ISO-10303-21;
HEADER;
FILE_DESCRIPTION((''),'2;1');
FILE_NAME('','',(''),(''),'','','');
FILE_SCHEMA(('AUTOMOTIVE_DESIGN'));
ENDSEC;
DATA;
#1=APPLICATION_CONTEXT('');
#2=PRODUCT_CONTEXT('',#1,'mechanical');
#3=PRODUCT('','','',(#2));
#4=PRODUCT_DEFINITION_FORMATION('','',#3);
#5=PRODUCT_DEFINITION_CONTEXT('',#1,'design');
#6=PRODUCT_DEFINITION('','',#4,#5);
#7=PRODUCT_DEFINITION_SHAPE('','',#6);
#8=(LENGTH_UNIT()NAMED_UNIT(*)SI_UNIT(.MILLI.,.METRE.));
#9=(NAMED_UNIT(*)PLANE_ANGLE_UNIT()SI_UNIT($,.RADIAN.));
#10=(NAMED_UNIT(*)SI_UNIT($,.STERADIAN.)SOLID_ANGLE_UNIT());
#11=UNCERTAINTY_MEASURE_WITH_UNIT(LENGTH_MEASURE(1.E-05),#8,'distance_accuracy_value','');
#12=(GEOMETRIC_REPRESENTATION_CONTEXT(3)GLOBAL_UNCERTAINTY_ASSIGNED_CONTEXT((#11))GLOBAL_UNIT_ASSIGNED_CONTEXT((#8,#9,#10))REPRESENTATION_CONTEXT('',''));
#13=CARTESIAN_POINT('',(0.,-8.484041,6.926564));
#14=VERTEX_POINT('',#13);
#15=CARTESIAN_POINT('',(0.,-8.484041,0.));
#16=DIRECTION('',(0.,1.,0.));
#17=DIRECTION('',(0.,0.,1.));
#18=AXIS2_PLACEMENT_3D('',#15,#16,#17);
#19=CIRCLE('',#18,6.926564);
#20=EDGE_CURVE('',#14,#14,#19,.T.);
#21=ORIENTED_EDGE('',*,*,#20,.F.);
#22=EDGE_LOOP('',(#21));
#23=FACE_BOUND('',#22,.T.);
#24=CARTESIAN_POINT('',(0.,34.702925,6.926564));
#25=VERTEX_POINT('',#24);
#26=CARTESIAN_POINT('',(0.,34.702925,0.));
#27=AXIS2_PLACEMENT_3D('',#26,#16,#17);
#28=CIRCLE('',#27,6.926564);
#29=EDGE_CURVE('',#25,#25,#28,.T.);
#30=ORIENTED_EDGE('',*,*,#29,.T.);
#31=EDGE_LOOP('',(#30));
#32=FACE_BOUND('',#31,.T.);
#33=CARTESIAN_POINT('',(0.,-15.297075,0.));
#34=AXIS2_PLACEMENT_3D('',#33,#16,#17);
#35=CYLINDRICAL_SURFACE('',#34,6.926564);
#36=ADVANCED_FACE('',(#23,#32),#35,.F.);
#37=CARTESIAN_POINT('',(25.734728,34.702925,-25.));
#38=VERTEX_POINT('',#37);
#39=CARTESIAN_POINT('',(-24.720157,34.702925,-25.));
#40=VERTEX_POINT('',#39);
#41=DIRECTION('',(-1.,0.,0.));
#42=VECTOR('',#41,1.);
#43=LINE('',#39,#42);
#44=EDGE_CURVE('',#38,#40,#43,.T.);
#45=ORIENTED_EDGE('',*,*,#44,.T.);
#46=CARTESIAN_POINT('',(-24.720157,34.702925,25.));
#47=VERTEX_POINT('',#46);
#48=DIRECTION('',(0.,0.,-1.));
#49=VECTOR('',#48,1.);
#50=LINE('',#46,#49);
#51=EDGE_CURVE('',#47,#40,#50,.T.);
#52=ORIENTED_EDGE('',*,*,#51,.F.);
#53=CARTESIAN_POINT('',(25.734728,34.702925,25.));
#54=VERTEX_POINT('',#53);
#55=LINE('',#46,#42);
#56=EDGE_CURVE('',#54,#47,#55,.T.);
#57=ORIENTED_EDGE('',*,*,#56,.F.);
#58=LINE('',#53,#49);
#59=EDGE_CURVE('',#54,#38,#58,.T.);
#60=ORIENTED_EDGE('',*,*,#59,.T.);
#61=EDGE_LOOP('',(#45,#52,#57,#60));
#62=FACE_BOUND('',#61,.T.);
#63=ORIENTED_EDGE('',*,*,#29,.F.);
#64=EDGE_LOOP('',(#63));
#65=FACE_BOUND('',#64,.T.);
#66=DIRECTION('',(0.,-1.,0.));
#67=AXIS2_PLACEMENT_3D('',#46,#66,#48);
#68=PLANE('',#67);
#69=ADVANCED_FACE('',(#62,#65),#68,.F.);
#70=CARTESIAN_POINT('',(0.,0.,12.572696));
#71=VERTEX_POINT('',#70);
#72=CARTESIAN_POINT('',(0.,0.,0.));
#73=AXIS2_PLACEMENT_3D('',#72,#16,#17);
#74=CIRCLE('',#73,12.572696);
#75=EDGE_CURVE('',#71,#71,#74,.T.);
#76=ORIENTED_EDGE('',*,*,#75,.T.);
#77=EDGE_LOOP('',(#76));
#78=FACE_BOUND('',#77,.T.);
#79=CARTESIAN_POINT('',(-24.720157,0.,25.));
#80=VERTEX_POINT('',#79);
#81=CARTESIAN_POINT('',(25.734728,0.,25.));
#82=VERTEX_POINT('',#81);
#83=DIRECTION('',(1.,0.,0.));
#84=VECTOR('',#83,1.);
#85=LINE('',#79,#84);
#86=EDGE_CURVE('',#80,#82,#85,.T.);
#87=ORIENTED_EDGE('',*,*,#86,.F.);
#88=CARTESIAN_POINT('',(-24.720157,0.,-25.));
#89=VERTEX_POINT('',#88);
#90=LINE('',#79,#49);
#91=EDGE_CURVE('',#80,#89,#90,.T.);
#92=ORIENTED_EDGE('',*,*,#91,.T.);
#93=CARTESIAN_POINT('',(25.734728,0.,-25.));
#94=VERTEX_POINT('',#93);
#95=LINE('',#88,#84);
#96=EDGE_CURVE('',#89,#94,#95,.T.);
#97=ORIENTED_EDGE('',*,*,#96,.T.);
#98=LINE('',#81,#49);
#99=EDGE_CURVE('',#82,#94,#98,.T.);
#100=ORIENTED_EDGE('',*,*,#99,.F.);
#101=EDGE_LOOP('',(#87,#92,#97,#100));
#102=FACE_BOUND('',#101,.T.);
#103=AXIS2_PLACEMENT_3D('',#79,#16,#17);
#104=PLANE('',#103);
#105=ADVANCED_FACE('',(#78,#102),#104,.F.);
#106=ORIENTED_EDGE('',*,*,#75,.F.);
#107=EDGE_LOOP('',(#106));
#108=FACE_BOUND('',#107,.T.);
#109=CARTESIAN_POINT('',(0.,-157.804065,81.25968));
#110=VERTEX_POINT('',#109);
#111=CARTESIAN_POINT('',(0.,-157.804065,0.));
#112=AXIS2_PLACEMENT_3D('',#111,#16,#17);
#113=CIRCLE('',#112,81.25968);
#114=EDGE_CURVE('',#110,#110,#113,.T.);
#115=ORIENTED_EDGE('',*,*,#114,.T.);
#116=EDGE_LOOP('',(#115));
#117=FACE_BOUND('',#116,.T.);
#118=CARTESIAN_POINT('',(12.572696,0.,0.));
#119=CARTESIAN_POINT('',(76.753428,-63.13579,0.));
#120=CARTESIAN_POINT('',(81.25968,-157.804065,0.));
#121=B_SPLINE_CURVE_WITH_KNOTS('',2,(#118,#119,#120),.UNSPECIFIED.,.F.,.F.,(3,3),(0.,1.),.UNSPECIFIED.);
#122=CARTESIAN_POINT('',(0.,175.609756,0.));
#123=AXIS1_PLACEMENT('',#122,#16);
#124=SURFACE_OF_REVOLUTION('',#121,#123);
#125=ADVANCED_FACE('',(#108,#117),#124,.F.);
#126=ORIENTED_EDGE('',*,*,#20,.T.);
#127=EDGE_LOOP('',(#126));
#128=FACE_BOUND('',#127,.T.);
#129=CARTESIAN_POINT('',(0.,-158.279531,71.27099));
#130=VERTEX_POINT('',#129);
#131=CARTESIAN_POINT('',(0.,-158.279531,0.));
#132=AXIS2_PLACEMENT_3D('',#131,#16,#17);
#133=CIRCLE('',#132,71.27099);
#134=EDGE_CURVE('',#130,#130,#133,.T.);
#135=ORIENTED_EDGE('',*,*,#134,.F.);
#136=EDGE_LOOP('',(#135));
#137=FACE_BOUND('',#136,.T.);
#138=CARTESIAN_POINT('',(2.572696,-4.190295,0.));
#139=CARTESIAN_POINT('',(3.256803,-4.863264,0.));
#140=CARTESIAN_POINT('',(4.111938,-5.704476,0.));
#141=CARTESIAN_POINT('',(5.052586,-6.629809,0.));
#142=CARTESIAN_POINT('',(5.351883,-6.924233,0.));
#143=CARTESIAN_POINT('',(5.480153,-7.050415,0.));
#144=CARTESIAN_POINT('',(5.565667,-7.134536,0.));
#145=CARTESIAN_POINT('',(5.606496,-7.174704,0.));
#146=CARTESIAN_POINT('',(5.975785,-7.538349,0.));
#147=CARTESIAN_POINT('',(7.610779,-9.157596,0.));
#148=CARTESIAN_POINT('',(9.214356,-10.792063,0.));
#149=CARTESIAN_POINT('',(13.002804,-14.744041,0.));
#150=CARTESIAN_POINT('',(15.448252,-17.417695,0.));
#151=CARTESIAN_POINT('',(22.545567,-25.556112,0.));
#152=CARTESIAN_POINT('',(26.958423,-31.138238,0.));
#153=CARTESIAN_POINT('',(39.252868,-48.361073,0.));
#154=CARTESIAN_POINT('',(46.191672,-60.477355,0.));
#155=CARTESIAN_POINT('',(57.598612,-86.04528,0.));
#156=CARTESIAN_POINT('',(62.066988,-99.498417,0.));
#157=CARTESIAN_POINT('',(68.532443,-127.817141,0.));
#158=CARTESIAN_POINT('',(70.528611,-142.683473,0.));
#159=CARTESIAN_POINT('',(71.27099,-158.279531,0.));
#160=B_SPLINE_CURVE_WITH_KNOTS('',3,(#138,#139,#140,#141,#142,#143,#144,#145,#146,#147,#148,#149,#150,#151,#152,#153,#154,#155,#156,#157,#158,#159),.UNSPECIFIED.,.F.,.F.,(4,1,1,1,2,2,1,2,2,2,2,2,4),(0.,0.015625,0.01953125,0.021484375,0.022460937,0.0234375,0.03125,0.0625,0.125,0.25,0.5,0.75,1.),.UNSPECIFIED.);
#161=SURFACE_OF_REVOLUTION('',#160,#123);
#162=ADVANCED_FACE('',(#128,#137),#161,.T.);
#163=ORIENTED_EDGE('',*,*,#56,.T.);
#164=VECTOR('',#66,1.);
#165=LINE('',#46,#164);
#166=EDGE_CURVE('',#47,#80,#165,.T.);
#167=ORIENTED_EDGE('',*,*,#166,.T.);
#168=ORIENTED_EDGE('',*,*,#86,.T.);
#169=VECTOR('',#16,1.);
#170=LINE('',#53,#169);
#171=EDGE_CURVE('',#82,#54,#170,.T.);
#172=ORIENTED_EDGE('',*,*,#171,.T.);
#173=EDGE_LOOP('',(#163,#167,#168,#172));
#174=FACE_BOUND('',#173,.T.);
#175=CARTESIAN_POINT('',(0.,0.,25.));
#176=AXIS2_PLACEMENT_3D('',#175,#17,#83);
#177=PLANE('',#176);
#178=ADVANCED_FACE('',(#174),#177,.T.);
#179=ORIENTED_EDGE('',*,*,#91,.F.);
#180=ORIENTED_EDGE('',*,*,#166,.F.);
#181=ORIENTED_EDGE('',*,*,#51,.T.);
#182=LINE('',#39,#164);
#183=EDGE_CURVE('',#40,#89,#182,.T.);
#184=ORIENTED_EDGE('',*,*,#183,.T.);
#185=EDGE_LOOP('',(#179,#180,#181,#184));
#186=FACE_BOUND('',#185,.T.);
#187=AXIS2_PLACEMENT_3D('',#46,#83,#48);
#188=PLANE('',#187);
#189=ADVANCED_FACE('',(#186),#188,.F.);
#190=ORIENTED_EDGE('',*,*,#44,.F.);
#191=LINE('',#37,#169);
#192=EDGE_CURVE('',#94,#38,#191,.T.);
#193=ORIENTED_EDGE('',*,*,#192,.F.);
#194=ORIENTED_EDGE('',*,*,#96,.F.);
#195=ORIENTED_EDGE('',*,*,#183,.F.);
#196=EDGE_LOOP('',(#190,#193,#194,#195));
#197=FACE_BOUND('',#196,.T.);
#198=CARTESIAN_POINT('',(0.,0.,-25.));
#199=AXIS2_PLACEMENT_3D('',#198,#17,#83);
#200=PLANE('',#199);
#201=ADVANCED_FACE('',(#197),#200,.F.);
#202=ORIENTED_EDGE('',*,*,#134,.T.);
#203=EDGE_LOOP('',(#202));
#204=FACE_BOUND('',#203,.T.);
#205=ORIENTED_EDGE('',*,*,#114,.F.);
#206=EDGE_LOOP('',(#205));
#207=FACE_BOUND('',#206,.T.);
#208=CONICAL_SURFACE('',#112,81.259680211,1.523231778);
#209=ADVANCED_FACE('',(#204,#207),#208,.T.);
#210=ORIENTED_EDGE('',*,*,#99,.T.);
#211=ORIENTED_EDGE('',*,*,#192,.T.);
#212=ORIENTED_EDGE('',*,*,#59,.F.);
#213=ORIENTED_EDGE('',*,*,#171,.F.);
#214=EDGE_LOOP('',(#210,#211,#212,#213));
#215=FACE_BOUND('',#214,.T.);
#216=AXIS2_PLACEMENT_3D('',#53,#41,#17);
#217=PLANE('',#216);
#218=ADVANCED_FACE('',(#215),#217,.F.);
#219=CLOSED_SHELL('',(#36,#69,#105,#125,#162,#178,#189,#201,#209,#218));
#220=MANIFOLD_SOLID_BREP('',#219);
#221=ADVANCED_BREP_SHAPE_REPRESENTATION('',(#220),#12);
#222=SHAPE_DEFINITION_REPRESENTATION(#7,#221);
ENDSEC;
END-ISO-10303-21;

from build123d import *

# Parameters (mm, degrees)
REVOLVE_THIN1_OUTLINE_W   = 10
REVOLVE_THIN1_OUTLINE_H   = 4.190294711
REVOLVE_THIN1_OUTLINE_H_2 = 25.430398101
SKETCH4_W                 = 50.454885555
SKETCH4_H                 = 34.702925128
BOSS_EXTRUDE1_DEPTH       = 25
SKETCH5_R                 = 6.92656428
CUT_EXTRUDE1_DEPTH        = 50


# Read off the part's stored shape, not the designer's step: Revolve-Thin1
with BuildPart() as part:
    # Revolve-Thin1 outline → Revolve-Thin1 (revolve)
    with BuildSketch(Plane.XY):
        with BuildLine():
            Line((12.572695835, -4.190294711), (2.572695835, -4.190294711))
            add(Edge.make_bspline(
                [(2.572695835, -4.190294711), (3.256803477, -4.863264231), (4.111938029, -5.704476131), (5.052586036, -6.629809221), (5.351883129, -6.924233386), (5.480153312, -7.050415171), (5.565666767, -7.134536361), (5.60649606, -7.174703671), (5.975784665, -7.538349261), (7.610779142, -9.157595772), (9.214355978, -10.792063367), (11.18191941, -12.844557715), (11.880423743, -13.582762852), (12.572695835, -14.324008024)],
                knots=[0, 0, 0, 0, 0.015625, 0.01953125, 0.021484375, 0.022460937, 0.022460937, 0.0234375, 0.0234375, 0.03125, 0.0625, 0.0625, 0.079939883, 0.079939883, 0.079939883, 0.079939883], degree=3))
            Line((12.572695835, -14.324008024), (12.572695835, -4.190294711))
        make_face()
        with Locations((7.572695835, -2.095147355)):
            Rectangle(REVOLVE_THIN1_OUTLINE_W, REVOLVE_THIN1_OUTLINE_H)
        with BuildLine():
            Line((12.572695835, -4.190294711), (12.572695835, -14.324008024))
            add(Edge.make_bspline(
                [(12.572695835, -14.324008024), (14.361346695, -16.239192574), (16.108392925, -18.174671527), (22.545566832, -25.556112446), (26.95842293, -31.138237836), (39.252867809, -48.361072942), (46.191672462, -60.477354516), (57.598611585, -86.045280246), (62.066987666, -99.498416997), (68.499575811, -127.673184033), (70.487892964, -142.381255893), (71.247958055, -157.804064752)],
                knots=[0.079939883, 0.079939883, 0.079939883, 0.079939883, 0.125, 0.125, 0.25, 0.25, 0.5, 0.5, 0.75, 0.75, 0.997458266, 0.997458266, 0.997458266, 0.997458266], degree=3))
            Line((71.247958055, -157.804064752), (71.270990011, -157.804064752))
            Line((71.270990011, -157.804064752), (71.270990011, -96.986600276))
            add(Edge.make_bspline(
                [(16.732968649, -4.190294711), (55.715421715, -44.398968265), (71.270990011, -96.986600276)],
                knots=[0.032914248, 0.032914248, 0.032914248, 0.659474661, 0.659474661, 0.659474661], degree=2))
            Line((16.732968649, -4.190294711), (12.572695835, -4.190294711))
        make_face()
        with Locations((7.572695835, 12.715199051)):
            Rectangle(REVOLVE_THIN1_OUTLINE_W, REVOLVE_THIN1_OUTLINE_H_2)
        with BuildLine():
            Line((12.572695835, 0), (12.572695835, -4.190294711))
            Line((12.572695835, -4.190294711), (16.732968649, -4.190294711))
            add(Edge.make_bspline(
                [(12.572695835, 0), (14.685156347, -2.078067033), (16.732968649, -4.190294711)],
                knots=[0, 0, 0, 0.032914248, 0.032914248, 0.032914248], degree=2))
        make_face()
        with BuildLine():
            Line((71.270990011, -157.804064752), (71.247958055, -157.804064752))
            add(Edge.make_bspline(
                [(71.247958055, -157.804064752), (71.255764961, -157.96247806), (71.263442286, -158.120966773), (71.270990011, -158.279530915)],
                knots=[0.997458266, 0.997458266, 0.997458266, 0.997458266, 1, 1, 1, 1], degree=3))
            Line((71.270990011, -158.279530915), (71.270990011, -157.804064752))
        make_face()
        Polygon((71.270990011, -157.804064752), (71.270990011, -158.279530915), (81.259680211, -157.804064752), align=None)
        with BuildLine():
            Line((71.270990011, -96.986600276), (71.270990011, -157.804064752))
            Line((71.270990011, -157.804064752), (81.259680211, -157.804064752))
            add(Edge.make_bspline(
                [(71.270990011, -96.986600276), (79.725187008, -125.567118335), (81.259680211, -157.804064752)],
                knots=[0.659474661, 0.659474661, 0.659474661, 1, 1, 1], degree=2))
        make_face()
    revolve(axis=Axis((0, 0, 0), (0, 1, 0)))

    # Sketch4 → Boss-Extrude1 (add, symmetric)
    with BuildSketch(Plane.XY):
        with Locations((0.507285531, 17.351462564)):
            Rectangle(SKETCH4_W, SKETCH4_H)
    extrude(amount=BOSS_EXTRUDE1_DEPTH, both=True)

    # Sketch5 → Cut-Extrude1 (cut)
    with BuildSketch(Plane(origin=(0, 34.702925128, 0), x_dir=(1, 0, 0), z_dir=(0, 1, 0))):
        with Locations(Location((0, 0, 0), (0, 0, 270))):
            Circle(SKETCH5_R)
    extrude(amount=-CUT_EXTRUDE1_DEPTH, mode=Mode.SUBTRACT)


solid = part.part
